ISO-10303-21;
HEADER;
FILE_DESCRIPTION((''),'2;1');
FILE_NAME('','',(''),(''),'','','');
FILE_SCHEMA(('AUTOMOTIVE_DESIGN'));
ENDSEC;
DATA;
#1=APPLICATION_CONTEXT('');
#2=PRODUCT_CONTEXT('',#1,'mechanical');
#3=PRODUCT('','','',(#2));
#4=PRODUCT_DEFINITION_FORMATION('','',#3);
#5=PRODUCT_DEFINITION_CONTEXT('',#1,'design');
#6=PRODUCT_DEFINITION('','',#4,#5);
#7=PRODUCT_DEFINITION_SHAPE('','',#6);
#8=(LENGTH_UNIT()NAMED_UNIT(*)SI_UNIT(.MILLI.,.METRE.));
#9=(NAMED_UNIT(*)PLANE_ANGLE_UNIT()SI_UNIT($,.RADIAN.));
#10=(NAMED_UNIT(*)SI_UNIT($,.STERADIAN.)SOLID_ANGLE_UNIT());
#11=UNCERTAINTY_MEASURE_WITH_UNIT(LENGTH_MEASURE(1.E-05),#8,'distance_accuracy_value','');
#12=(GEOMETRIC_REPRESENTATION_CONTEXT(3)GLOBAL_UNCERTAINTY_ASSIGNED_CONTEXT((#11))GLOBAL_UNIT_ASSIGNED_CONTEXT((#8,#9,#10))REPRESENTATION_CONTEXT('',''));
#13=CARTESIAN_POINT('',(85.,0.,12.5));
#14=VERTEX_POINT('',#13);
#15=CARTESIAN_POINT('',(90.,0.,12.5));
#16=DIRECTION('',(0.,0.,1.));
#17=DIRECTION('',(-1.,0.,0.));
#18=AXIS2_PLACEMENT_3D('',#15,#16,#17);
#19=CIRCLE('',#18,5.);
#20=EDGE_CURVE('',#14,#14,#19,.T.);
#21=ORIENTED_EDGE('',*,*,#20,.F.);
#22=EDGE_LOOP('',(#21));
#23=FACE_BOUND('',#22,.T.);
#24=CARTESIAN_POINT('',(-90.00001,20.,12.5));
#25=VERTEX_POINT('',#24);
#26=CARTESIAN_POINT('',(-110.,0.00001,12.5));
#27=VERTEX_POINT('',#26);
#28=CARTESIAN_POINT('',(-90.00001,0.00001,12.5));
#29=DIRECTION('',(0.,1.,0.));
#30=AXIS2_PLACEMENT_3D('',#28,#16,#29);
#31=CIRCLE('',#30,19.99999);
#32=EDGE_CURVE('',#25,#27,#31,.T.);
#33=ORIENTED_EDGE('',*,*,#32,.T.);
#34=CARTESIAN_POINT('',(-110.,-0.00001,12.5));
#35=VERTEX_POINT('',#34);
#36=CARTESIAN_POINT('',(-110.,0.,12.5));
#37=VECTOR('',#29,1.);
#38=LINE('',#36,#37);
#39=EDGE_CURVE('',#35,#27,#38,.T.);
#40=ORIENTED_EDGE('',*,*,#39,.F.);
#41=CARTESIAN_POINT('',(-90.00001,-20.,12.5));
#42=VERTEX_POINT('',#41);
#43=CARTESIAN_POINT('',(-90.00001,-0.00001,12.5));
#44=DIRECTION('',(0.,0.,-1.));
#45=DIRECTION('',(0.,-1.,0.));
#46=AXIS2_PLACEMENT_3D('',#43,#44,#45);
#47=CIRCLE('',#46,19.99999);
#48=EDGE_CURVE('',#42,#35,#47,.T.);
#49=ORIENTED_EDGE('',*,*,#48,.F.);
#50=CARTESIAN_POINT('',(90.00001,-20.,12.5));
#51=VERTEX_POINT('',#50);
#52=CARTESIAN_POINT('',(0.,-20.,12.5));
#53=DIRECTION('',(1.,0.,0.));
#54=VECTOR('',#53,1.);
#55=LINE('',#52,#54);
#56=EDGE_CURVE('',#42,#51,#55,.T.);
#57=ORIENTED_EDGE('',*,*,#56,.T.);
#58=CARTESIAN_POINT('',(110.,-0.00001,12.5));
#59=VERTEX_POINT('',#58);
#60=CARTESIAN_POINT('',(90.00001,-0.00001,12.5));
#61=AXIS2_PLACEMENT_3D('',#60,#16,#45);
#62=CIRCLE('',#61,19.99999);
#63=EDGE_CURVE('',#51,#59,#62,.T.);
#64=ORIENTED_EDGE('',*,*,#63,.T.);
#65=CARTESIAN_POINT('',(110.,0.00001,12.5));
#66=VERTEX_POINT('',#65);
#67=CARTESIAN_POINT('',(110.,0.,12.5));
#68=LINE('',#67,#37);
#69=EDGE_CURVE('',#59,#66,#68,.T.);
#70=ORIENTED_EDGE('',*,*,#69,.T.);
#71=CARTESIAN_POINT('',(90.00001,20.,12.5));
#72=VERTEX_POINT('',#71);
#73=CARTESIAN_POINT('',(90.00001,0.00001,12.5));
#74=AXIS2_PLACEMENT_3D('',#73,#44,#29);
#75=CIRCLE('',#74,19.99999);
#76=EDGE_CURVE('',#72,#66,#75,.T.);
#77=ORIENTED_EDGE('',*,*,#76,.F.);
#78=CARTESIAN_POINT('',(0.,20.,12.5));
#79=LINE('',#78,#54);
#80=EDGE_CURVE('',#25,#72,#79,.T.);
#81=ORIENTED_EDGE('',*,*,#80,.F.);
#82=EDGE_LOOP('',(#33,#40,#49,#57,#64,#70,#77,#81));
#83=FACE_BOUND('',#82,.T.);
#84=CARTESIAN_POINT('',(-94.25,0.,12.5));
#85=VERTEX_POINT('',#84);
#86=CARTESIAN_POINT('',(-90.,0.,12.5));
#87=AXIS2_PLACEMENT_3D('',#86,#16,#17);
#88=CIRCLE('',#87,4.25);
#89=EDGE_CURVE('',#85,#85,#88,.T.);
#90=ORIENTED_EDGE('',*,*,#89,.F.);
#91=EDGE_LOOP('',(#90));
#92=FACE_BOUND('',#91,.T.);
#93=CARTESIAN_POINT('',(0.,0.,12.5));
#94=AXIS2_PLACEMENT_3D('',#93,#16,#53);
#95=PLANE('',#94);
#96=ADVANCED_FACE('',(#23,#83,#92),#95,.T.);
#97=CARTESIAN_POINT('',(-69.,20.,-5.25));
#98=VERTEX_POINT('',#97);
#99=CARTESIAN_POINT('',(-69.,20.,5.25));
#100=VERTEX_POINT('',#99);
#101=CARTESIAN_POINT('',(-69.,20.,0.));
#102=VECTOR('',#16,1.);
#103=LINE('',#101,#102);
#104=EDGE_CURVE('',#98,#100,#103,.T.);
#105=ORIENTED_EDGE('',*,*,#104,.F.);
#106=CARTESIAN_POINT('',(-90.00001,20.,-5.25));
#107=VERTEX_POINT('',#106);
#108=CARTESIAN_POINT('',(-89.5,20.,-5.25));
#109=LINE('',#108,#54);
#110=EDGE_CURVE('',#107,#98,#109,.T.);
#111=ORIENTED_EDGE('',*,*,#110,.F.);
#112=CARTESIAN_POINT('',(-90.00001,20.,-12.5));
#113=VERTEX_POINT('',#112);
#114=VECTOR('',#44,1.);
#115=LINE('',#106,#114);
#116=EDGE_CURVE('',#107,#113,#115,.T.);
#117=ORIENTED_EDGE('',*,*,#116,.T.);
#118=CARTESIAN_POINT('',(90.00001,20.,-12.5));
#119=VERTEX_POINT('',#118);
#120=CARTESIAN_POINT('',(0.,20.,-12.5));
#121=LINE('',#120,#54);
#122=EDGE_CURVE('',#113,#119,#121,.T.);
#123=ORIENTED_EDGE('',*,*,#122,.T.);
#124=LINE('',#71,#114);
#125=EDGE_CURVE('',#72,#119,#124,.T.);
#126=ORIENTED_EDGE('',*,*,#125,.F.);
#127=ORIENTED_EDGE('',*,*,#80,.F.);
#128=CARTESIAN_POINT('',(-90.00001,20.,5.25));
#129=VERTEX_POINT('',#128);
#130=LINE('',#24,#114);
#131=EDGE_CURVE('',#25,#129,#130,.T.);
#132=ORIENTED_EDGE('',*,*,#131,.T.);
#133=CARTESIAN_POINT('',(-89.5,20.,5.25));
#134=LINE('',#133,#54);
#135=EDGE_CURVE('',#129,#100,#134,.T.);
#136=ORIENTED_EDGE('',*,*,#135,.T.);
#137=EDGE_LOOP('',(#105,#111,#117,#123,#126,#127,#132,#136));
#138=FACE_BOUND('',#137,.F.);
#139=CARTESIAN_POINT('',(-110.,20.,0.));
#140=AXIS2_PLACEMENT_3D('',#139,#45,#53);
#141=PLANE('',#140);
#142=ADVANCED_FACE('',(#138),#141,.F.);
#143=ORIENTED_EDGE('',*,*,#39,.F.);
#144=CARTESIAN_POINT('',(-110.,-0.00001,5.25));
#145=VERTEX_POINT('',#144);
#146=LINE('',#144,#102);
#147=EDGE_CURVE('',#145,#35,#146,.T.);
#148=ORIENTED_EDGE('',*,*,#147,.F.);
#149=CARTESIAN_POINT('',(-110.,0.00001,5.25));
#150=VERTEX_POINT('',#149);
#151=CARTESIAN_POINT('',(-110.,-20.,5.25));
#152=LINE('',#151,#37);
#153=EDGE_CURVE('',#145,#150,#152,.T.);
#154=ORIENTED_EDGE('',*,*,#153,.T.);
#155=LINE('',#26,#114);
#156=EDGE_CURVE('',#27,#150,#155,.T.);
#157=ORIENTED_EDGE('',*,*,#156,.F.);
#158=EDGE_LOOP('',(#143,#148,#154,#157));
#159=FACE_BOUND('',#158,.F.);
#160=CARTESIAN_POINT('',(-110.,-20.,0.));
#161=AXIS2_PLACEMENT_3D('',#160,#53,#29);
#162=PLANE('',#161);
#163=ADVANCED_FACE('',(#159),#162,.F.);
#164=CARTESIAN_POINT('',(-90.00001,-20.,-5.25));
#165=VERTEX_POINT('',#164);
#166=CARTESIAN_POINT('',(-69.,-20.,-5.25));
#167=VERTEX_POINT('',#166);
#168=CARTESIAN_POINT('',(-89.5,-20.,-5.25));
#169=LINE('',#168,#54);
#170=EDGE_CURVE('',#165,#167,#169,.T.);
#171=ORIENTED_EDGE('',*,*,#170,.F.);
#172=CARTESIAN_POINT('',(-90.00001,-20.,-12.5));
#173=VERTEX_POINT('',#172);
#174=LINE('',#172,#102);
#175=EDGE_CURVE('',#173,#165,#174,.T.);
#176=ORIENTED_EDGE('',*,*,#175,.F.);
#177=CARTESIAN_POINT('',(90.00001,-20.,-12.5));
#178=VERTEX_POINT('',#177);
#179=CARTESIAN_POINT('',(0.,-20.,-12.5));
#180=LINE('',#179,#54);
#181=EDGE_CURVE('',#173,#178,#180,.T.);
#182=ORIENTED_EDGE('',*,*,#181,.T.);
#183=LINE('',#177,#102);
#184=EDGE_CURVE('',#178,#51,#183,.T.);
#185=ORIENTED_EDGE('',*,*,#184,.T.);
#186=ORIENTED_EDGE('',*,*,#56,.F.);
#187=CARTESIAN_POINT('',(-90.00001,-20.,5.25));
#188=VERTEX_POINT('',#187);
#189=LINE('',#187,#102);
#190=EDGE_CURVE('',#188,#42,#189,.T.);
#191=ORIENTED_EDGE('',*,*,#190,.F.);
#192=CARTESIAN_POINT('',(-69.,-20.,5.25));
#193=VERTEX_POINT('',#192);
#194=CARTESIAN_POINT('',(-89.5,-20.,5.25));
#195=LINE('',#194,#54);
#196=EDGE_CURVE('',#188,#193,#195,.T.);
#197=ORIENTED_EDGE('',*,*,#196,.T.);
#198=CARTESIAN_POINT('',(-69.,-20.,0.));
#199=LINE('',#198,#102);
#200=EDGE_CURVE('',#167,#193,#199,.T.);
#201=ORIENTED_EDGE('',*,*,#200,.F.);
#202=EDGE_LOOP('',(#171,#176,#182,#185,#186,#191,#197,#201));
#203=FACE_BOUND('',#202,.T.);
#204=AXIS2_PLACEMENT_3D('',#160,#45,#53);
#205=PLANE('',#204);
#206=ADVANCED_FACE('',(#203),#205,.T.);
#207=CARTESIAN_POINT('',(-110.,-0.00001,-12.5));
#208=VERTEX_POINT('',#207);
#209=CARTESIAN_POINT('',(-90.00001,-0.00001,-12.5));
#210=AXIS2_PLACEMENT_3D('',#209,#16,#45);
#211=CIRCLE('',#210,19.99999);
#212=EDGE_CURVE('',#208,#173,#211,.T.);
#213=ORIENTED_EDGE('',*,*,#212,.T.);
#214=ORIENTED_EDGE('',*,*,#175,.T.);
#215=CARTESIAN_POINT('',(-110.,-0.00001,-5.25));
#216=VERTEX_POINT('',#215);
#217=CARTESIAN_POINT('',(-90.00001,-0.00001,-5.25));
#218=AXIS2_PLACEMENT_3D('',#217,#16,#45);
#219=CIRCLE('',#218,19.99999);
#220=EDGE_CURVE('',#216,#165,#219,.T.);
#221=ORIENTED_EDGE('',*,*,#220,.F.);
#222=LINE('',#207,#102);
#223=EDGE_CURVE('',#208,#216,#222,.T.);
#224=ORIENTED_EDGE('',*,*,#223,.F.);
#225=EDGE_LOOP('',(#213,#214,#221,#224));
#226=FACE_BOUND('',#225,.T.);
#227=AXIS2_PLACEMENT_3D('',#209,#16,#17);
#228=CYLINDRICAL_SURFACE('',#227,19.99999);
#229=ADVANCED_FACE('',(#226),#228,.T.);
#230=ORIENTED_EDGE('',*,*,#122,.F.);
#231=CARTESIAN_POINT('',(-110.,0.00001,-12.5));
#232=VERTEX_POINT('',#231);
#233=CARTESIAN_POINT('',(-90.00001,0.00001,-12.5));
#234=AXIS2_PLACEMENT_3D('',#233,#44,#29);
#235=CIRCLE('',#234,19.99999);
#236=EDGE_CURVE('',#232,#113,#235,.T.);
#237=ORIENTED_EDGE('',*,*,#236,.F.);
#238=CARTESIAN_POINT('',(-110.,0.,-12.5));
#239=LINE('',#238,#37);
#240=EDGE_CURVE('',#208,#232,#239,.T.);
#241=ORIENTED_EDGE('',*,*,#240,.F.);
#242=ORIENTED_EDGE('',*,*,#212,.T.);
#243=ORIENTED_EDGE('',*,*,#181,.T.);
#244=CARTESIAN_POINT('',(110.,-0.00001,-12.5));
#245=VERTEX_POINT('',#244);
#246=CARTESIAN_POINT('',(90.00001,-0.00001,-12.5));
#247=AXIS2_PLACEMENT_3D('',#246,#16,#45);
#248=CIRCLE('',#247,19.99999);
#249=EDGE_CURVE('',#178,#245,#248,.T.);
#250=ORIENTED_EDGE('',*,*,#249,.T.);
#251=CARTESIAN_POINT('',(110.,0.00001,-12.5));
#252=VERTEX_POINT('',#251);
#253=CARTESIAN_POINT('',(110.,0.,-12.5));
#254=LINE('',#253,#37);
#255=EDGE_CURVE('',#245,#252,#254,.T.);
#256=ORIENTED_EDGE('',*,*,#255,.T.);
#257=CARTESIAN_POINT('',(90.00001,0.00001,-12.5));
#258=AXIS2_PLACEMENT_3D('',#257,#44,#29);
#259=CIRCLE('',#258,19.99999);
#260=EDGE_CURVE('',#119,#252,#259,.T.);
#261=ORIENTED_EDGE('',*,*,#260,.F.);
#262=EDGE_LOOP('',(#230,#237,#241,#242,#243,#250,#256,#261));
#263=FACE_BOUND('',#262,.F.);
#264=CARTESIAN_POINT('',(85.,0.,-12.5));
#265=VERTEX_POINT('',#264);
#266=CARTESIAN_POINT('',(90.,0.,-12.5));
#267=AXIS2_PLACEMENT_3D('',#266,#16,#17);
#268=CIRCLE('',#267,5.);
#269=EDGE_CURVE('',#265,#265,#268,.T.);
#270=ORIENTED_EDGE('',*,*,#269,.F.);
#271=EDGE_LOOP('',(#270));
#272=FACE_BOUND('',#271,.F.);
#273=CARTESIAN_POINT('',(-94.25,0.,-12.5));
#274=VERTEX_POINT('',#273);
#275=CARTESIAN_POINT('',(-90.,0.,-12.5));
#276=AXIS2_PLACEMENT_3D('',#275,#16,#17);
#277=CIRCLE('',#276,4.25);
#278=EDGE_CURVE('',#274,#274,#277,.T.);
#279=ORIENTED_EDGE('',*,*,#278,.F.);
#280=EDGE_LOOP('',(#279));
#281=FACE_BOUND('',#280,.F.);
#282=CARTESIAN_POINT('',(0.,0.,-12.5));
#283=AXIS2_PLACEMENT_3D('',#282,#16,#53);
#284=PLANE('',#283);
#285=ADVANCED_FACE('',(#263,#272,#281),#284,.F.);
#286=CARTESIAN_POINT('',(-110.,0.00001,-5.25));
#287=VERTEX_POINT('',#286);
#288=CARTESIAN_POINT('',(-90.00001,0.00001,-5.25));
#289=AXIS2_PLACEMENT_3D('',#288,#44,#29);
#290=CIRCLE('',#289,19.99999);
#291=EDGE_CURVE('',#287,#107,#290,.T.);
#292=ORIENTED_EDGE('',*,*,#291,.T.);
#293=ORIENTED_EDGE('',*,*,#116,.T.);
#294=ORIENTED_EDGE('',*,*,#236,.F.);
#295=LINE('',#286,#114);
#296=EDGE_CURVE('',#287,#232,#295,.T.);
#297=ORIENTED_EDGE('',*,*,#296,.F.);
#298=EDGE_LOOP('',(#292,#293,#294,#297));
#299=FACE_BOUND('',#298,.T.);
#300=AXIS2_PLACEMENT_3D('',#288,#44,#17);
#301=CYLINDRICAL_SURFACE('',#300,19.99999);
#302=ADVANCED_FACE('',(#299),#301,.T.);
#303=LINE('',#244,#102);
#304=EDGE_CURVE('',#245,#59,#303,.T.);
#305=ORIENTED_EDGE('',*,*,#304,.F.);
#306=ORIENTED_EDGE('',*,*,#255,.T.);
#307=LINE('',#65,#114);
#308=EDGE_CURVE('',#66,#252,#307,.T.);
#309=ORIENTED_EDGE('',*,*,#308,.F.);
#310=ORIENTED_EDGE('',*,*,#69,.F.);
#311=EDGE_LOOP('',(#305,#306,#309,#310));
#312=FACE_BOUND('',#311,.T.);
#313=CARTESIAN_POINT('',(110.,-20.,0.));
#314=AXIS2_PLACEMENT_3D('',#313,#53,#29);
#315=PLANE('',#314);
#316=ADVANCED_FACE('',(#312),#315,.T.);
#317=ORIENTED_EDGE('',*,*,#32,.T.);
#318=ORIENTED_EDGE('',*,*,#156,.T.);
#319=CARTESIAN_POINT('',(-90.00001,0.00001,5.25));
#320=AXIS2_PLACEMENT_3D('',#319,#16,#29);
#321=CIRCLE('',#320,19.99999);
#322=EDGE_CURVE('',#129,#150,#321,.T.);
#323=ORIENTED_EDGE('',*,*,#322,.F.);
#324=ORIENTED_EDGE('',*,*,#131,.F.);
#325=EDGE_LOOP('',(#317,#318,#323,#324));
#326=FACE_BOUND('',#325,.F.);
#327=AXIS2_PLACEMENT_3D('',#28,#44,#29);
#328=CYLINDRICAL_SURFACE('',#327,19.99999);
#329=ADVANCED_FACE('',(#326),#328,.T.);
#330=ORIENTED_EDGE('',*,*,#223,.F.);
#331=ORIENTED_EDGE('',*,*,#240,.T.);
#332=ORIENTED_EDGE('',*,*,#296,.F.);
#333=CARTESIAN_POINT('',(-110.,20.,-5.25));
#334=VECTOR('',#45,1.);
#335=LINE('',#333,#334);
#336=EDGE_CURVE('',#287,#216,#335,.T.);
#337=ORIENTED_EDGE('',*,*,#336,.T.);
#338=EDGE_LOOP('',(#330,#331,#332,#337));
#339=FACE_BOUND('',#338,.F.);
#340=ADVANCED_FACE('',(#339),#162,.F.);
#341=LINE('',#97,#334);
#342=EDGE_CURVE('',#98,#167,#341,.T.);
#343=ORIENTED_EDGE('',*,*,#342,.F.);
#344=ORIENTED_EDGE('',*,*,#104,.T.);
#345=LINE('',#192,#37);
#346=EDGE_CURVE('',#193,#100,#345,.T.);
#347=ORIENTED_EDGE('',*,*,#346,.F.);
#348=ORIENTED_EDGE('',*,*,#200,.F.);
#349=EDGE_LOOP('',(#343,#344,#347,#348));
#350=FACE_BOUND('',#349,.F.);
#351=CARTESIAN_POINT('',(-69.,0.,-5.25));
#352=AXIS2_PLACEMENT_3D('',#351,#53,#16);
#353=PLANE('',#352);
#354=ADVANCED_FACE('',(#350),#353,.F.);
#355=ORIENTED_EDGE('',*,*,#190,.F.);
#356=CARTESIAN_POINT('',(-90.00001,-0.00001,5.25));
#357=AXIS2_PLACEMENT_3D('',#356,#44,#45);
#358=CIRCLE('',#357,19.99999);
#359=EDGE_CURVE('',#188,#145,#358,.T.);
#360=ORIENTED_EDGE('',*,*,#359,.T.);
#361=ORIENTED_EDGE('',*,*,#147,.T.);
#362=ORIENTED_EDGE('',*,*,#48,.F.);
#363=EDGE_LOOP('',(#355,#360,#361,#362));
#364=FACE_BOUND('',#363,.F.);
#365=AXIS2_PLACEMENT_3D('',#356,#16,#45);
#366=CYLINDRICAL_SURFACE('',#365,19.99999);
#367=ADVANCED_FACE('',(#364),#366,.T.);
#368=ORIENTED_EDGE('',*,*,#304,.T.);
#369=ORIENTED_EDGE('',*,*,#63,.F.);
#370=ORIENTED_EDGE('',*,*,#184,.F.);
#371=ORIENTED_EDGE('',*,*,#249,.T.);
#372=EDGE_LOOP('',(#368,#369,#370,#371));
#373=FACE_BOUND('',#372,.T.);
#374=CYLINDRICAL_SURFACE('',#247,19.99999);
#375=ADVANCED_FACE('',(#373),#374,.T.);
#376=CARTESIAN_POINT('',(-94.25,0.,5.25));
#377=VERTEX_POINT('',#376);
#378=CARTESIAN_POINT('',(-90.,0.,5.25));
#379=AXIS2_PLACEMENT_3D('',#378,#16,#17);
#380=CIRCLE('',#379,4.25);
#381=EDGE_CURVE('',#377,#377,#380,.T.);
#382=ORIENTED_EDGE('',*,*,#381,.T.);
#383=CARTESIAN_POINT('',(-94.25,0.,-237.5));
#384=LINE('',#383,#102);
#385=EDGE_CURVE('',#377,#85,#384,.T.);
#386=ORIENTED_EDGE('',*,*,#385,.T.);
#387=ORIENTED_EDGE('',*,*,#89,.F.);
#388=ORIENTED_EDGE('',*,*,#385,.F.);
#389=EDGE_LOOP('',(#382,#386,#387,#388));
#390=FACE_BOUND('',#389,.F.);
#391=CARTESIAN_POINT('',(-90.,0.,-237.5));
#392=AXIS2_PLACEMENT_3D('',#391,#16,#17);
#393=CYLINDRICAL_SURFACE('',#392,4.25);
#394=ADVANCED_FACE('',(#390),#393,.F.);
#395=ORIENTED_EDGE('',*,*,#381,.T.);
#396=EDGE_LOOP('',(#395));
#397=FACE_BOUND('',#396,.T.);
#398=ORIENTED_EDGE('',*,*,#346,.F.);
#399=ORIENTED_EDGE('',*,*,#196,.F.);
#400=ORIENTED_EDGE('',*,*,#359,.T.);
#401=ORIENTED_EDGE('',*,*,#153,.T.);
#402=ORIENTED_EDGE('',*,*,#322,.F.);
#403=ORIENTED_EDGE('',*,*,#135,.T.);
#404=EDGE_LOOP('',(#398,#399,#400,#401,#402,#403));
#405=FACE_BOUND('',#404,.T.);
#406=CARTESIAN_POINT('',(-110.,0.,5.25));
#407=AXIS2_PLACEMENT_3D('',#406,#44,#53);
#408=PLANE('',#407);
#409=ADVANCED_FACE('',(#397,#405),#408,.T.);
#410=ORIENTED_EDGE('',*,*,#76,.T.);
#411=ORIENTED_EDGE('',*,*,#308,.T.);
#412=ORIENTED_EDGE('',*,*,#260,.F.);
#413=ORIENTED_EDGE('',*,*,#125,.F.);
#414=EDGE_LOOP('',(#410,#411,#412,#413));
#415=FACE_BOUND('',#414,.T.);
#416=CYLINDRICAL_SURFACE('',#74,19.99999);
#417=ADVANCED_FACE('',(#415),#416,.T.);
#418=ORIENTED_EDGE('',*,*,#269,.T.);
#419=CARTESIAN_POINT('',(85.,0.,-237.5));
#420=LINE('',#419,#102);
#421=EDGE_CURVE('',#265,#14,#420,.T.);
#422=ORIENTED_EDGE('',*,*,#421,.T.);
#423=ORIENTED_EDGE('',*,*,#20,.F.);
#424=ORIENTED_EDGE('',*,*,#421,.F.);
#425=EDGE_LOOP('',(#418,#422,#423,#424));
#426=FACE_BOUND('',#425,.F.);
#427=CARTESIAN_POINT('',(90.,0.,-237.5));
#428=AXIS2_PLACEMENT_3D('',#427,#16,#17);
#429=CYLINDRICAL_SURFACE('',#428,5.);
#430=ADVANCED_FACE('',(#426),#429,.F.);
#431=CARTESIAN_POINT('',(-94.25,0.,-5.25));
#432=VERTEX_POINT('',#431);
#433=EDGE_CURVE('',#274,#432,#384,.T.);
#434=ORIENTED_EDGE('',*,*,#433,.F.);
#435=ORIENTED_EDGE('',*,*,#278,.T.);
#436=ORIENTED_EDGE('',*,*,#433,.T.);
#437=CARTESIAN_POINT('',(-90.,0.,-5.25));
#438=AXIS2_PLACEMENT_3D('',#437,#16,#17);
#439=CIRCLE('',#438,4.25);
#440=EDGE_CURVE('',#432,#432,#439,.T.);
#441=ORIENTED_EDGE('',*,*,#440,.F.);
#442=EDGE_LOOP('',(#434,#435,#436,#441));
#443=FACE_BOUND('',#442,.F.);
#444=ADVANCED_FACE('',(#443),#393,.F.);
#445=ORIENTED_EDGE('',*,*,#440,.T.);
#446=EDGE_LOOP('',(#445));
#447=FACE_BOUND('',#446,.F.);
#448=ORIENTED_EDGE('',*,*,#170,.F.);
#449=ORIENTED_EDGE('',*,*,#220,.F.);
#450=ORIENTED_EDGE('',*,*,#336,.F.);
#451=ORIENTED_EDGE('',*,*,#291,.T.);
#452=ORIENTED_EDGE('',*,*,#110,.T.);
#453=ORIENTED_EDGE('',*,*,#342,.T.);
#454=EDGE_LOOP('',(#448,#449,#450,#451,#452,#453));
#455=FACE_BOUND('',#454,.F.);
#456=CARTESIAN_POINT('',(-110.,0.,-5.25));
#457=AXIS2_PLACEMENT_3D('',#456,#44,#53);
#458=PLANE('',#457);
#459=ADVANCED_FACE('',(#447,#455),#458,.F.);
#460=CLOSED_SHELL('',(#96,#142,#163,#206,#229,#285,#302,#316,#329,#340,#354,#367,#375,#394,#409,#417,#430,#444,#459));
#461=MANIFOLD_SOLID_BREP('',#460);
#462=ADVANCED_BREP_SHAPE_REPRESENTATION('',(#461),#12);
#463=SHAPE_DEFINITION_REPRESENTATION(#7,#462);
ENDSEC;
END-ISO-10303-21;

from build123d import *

# Parameters (mm, degrees)
F0_W     = 220
F0_H     = 40
F1_DEPTH = 12.5
F2_W     = 41
F2_H     = 10.5
F3_DEPTH = 20
F4_R     = 19.99999
F6_D     = 8.5
F8_D     = 10
F9_R     = 19.99999


# Not quite as in the source:
# - a fillet or chamfer is up to 0.001 mm smaller than in the source, because OpenCascade refuses the exact size


with BuildPart() as f1:
    # F0 (on Top) → F1 (new body, symmetric)
    with BuildSketch(Plane.XY):
        Rectangle(F0_W, F0_H)
    extrude(amount=F1_DEPTH, both=True)

    # F2 (on Front) → F3 (cut, symmetric)
    with BuildSketch(Plane.XZ):
        with Locations((-89.5, 0)):
            Rectangle(F2_W, F2_H)
    extrude(amount=F3_DEPTH, both=True, mode=Mode.SUBTRACT)

    # F4 (radius 20 in the source; OpenCascade refuses exactly that, so slightly less here)
    f4_edges = [f1.edges().sort_by_distance(p)[0] for p in [
        (-110, 20, 8.875),
        (-110, -20, 8.875),
        (-110, -20, -8.875),
        (-110, 20, -8.875),
    ]]
    fillet(f4_edges, radius=F4_R)

    # F6 (through all)
    with Locations(Plane(origin=(0, 0, -12.5), x_dir=(1, 0, 0), z_dir=(0, 0, -1))):
        with Locations((-90, 0)):
            Hole(F6_D / 2)

    # F8 (through all)
    with Locations(Plane(origin=(0, 0, -12.5), x_dir=(1, 0, 0), z_dir=(0, 0, -1))):
        with Locations((90, 0)):
            Hole(F8_D / 2)

    # F9 (radius 20 in the source; OpenCascade refuses exactly that, so slightly less here)
    f9_edges = [f1.edges().sort_by_distance(p)[0] for p in [
        (110, -20, 0),
        (110, 20, 0),
    ]]
    fillet(f9_edges, radius=F9_R)


solid = f1.part
